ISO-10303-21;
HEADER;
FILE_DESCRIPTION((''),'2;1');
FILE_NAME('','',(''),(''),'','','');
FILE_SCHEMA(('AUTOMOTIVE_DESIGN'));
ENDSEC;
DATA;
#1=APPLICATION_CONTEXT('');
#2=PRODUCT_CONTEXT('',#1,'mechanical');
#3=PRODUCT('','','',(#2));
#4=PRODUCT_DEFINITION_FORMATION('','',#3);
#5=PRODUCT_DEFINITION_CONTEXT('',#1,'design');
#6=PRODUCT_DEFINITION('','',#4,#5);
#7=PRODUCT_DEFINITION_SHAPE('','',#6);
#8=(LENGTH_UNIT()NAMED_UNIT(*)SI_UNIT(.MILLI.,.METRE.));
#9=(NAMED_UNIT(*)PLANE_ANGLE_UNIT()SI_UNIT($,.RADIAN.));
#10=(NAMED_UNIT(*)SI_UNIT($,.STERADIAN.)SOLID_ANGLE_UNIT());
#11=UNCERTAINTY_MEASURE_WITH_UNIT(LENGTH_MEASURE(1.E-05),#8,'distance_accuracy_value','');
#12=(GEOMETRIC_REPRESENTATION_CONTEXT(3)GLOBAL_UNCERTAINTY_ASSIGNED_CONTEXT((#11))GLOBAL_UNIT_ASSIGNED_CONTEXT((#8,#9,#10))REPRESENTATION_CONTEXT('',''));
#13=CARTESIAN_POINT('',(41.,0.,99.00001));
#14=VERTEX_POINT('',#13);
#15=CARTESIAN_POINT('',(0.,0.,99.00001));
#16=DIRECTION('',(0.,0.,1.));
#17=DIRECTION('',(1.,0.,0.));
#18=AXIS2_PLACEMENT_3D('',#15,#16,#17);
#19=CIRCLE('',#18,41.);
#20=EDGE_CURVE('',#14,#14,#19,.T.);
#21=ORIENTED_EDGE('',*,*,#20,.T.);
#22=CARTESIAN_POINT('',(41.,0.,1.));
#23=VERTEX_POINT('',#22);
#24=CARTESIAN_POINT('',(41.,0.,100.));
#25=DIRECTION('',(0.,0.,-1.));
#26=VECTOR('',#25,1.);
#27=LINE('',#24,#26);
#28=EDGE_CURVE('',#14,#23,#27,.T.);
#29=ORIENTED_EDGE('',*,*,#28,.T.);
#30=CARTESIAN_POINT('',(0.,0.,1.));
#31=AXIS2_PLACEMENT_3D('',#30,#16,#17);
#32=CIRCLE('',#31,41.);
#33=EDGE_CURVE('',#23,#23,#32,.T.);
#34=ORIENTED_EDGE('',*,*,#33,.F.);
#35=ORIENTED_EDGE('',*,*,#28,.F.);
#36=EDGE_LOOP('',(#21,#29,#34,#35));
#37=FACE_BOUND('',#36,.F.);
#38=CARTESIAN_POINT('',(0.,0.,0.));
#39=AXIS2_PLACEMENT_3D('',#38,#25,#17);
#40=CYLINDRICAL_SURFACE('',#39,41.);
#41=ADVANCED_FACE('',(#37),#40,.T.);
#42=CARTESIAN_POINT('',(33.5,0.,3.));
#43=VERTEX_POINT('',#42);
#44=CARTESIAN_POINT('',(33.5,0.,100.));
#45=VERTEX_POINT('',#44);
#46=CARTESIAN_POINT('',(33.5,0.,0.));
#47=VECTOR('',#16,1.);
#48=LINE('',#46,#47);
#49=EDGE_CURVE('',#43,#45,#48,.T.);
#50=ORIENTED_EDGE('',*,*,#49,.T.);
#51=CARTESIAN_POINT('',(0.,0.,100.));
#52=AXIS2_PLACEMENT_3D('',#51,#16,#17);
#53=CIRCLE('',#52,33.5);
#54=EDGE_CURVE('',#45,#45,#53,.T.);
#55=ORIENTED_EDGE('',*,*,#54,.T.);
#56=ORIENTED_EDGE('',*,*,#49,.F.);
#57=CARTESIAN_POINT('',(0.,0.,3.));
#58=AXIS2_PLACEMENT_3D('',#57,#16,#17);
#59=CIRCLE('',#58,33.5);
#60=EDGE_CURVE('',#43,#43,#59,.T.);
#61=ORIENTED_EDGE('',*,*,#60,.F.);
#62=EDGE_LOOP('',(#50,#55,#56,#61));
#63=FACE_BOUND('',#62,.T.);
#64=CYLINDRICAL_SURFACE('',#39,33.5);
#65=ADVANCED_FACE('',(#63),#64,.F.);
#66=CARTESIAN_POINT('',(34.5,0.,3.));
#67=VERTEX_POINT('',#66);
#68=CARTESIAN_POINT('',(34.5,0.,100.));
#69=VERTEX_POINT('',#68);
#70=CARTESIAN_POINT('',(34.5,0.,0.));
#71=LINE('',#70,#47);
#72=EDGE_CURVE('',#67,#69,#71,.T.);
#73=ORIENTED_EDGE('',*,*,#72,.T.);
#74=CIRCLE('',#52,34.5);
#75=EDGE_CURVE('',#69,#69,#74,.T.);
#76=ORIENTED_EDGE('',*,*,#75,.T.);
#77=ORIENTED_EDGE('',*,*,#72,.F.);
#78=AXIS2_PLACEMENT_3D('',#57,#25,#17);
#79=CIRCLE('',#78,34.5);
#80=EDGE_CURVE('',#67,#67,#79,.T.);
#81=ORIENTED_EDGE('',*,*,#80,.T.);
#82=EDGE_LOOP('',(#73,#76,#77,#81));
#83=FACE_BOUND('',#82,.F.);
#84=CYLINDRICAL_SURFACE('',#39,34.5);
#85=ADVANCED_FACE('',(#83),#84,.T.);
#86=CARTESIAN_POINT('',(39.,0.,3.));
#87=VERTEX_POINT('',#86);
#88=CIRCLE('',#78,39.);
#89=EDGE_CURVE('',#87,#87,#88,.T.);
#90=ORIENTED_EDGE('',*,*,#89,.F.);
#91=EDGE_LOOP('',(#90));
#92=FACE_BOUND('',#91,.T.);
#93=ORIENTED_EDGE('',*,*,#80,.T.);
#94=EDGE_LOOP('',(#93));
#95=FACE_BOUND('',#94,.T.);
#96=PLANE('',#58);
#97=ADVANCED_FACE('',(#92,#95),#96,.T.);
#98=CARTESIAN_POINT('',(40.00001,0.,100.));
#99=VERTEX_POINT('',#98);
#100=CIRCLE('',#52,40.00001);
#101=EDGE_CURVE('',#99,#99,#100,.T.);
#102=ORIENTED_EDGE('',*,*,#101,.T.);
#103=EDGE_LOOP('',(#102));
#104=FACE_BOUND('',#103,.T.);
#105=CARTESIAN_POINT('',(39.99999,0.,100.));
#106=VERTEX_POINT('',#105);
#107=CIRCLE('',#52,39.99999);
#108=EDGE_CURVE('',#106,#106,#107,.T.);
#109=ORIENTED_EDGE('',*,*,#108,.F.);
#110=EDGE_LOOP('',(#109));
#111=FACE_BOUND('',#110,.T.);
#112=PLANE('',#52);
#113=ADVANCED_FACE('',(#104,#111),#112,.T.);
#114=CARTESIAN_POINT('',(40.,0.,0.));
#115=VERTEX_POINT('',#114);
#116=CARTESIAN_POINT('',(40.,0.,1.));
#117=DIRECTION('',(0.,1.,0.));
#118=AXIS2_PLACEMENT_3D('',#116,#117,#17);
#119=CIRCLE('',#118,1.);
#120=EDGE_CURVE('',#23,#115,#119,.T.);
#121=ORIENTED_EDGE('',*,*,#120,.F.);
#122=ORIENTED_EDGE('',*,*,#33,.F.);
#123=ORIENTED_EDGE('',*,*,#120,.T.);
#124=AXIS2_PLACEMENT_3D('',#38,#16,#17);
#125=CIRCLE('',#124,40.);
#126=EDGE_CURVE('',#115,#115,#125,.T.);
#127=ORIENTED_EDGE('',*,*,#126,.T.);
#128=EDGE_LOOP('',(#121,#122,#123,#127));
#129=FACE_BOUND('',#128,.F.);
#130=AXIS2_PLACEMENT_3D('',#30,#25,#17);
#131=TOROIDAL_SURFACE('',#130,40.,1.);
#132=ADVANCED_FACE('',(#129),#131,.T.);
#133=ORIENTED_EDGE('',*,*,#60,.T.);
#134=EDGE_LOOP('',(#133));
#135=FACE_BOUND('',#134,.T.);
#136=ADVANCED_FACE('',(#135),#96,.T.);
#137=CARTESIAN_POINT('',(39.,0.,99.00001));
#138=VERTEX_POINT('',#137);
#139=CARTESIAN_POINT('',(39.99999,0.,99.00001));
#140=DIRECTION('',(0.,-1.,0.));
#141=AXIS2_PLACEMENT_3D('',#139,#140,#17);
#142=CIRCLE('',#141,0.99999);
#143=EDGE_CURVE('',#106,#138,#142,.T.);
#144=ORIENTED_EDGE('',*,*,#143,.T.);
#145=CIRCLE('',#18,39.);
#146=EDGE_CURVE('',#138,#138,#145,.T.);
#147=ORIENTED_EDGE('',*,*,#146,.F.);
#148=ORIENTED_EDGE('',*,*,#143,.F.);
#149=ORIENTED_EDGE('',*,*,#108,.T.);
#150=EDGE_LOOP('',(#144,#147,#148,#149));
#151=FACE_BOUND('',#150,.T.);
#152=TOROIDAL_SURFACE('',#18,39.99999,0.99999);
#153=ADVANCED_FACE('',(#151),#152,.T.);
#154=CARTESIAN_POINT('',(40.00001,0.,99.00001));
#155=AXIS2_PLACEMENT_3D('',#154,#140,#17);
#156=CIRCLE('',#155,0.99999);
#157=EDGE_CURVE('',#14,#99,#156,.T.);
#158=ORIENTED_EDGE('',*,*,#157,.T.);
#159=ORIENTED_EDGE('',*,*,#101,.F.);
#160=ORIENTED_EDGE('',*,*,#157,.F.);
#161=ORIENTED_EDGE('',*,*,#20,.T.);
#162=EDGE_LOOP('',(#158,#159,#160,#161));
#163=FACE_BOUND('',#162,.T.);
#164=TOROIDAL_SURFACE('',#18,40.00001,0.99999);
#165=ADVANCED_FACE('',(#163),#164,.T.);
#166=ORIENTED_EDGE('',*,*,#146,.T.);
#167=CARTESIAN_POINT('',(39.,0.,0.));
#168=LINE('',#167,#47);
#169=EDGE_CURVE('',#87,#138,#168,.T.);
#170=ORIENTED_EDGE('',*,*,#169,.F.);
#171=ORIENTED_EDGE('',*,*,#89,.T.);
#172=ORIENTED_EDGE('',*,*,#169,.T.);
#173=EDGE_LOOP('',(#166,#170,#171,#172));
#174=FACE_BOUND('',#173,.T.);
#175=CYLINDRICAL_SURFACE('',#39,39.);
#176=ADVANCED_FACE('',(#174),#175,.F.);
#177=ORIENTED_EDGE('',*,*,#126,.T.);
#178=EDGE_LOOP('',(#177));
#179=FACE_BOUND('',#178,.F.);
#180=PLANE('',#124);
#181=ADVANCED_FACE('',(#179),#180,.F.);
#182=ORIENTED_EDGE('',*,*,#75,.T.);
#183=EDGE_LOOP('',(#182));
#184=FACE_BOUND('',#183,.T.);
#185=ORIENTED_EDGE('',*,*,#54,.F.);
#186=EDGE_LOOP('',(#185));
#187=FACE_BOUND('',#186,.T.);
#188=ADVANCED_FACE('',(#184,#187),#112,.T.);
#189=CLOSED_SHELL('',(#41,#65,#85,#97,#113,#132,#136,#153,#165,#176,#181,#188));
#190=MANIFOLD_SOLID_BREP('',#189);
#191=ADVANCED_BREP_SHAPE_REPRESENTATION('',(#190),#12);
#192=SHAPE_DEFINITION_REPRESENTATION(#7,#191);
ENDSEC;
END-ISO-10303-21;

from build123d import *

# Parameters (mm, degrees)
F0_R     = 33.5
F1_DEPTH = 3
F2_R     = 34.5
F2_R_2   = 33.5
F3_DEPTH = 100
F4_R     = 41
F5_DEPTH = 3
F6_R     = 41
F6_R_2   = 39
F7_DEPTH = 100
F8_R     = 1
F9_R     = 0.99999


# Not quite as in the source:
# - a fillet or chamfer is up to 0.001 mm smaller than in the source, because OpenCascade refuses the exact size


with BuildPart() as f1:
    # F0 (on Top) → F1 (new body)
    with BuildSketch(Plane.XY):
        Circle(F0_R)
    extrude(amount=F1_DEPTH)

    # F2 (on Top) → F3 (join)
    with BuildSketch(Plane.XY):
        Circle(F2_R)
        Circle(F2_R_2, mode=Mode.SUBTRACT)
    extrude(amount=F3_DEPTH)

    # F4 (on Top) → F5 (join)
    with BuildSketch(Plane.XY):
        Circle(F4_R)
    extrude(amount=F5_DEPTH)

    # F6 (on Top) → F7 (join)
    with BuildSketch(Plane.XY):
        Circle(F6_R)
        Circle(F6_R_2, mode=Mode.SUBTRACT)
    extrude(amount=F7_DEPTH)

    # F8
    f8_edges = [f1.edges().sort_by_distance(p)[0] for p in [
        (-41, 0, 0),
    ]]
    fillet(f8_edges, radius=F8_R)

    # F9 (radius 1 in the source; OpenCascade refuses exactly that, so slightly less here)
    f9_edges = [f1.edges().sort_by_distance(p)[0] for p in [
        (-41, 0, 100),
        (-39, 0, 100),
    ]]
    fillet(f9_edges, radius=F9_R)


solid = f1.part
